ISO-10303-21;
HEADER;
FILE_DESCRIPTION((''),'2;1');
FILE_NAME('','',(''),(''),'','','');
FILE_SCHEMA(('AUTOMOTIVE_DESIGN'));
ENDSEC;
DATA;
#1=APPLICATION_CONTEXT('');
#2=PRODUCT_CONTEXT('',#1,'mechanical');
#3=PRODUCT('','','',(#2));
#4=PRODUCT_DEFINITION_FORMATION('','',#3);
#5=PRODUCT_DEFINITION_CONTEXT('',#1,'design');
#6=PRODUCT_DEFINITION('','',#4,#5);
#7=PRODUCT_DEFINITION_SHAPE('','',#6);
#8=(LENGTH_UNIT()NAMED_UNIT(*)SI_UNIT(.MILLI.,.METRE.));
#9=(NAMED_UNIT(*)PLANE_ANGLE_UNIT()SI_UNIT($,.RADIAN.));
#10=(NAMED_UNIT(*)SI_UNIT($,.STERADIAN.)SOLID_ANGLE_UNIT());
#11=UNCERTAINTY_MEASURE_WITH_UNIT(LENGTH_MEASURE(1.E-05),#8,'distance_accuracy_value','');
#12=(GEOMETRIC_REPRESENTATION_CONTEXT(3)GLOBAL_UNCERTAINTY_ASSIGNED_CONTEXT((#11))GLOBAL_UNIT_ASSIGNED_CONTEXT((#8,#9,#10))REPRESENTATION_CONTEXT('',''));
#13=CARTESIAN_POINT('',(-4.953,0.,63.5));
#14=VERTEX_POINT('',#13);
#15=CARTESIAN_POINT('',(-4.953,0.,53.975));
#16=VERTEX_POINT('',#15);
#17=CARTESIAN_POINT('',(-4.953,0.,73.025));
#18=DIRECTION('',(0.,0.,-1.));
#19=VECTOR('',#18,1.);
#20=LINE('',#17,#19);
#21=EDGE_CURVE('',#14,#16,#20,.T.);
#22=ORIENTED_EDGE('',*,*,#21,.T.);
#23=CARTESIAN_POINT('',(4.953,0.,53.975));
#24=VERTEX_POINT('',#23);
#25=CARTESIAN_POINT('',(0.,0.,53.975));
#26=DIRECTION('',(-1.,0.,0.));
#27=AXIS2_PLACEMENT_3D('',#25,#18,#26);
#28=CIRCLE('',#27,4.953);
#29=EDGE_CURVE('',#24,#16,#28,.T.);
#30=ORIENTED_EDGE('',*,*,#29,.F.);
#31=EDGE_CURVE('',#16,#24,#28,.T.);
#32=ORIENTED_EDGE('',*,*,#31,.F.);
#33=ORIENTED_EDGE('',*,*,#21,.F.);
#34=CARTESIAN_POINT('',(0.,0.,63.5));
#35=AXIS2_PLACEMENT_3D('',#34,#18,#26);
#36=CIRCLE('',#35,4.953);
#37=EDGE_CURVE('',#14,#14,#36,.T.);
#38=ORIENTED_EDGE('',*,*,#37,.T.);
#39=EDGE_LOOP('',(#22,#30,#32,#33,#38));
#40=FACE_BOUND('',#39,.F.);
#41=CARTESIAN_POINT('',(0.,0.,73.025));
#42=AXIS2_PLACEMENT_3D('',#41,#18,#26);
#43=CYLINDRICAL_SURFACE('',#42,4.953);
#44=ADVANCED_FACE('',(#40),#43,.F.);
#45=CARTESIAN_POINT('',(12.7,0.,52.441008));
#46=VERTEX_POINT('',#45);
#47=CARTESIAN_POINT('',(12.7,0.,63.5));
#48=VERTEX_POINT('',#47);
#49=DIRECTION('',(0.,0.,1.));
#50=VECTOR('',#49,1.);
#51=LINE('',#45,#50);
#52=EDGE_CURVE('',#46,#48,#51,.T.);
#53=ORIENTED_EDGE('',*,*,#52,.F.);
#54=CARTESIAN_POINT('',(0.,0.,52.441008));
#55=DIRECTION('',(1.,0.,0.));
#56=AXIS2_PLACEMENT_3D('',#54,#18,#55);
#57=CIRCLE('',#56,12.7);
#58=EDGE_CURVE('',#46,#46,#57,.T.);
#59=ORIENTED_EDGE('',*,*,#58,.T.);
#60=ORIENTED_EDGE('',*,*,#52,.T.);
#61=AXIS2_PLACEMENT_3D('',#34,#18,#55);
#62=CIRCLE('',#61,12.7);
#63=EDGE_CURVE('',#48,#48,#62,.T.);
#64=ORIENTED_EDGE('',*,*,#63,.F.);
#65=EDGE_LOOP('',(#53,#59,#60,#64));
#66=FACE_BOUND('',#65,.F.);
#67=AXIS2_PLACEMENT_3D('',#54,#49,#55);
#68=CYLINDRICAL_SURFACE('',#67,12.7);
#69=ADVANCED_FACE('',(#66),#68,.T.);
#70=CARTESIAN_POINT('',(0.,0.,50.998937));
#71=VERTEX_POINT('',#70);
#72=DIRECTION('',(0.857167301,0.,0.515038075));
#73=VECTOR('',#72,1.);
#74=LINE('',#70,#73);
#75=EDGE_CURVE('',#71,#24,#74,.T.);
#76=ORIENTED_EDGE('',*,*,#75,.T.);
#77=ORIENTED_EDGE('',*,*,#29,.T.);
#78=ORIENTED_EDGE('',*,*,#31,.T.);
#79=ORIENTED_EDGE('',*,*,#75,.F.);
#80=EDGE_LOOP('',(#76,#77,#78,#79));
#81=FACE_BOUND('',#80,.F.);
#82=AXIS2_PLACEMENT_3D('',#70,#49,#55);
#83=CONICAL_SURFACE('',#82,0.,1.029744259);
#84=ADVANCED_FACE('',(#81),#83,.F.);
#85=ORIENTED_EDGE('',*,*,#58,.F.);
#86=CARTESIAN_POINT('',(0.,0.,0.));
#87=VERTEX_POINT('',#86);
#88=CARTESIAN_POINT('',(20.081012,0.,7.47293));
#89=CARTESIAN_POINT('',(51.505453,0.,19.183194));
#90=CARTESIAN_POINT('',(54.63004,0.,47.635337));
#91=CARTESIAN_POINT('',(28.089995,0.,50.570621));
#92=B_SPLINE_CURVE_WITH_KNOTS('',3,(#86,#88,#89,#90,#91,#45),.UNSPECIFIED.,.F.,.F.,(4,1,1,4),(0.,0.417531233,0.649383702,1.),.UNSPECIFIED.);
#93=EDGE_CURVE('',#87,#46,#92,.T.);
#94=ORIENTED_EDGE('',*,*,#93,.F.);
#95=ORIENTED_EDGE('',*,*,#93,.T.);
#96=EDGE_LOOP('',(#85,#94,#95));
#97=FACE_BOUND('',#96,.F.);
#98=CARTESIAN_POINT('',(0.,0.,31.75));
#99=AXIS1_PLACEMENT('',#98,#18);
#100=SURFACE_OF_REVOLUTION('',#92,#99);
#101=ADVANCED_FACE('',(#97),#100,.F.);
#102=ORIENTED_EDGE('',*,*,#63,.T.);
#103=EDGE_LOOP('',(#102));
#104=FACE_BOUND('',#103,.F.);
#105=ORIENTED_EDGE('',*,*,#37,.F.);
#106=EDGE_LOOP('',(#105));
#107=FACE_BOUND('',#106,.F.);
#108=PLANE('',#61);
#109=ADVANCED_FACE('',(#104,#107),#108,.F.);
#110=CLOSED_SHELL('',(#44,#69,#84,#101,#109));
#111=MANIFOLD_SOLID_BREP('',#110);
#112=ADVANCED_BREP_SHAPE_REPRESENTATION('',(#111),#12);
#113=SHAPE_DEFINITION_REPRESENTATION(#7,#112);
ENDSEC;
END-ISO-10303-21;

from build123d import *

# Parameters (mm, degrees)
F3_D     = 9.906
F3_DEPTH = 9.525
F3_TIP   = 2.976062646


with BuildPart() as f1:
    # F0 (on Front) → F1 (revolve)
    with BuildSketch(Plane.XZ):
        with BuildLine():
            Line((0, 63.5), (0, 0))
            add(Edge.make_bspline(
                [(0, 0), (20.0810124413, 7.472930486), (51.505453427, 19.1831941683), (54.6300398828, 47.6353373564), (28.089994696, 50.5706208252), (12.7, 52.4410080066)],
                knots=[0, 0, 0, 0, 0.4175312333, 0.6493837023, 1, 1, 1, 1], degree=3))
            Line((12.7, 52.4410080066), (12.7, 63.5))
            Line((12.7, 63.5), (0, 63.5))
        make_face()
    revolve(axis=Axis((0, 0, 31.75), (0, 0, -1)))

    # F3
    with Locations(Plane.XY.offset(63.5)):
        with Locations((0, 0)):
            Hole(F3_D / 2, depth=F3_DEPTH)
            with Locations((0, 0, -(F3_DEPTH + F3_TIP / 2))):  # 118° drill point
                Cone(0, F3_D / 2, F3_TIP, mode=Mode.SUBTRACT)


solid = f1.part
